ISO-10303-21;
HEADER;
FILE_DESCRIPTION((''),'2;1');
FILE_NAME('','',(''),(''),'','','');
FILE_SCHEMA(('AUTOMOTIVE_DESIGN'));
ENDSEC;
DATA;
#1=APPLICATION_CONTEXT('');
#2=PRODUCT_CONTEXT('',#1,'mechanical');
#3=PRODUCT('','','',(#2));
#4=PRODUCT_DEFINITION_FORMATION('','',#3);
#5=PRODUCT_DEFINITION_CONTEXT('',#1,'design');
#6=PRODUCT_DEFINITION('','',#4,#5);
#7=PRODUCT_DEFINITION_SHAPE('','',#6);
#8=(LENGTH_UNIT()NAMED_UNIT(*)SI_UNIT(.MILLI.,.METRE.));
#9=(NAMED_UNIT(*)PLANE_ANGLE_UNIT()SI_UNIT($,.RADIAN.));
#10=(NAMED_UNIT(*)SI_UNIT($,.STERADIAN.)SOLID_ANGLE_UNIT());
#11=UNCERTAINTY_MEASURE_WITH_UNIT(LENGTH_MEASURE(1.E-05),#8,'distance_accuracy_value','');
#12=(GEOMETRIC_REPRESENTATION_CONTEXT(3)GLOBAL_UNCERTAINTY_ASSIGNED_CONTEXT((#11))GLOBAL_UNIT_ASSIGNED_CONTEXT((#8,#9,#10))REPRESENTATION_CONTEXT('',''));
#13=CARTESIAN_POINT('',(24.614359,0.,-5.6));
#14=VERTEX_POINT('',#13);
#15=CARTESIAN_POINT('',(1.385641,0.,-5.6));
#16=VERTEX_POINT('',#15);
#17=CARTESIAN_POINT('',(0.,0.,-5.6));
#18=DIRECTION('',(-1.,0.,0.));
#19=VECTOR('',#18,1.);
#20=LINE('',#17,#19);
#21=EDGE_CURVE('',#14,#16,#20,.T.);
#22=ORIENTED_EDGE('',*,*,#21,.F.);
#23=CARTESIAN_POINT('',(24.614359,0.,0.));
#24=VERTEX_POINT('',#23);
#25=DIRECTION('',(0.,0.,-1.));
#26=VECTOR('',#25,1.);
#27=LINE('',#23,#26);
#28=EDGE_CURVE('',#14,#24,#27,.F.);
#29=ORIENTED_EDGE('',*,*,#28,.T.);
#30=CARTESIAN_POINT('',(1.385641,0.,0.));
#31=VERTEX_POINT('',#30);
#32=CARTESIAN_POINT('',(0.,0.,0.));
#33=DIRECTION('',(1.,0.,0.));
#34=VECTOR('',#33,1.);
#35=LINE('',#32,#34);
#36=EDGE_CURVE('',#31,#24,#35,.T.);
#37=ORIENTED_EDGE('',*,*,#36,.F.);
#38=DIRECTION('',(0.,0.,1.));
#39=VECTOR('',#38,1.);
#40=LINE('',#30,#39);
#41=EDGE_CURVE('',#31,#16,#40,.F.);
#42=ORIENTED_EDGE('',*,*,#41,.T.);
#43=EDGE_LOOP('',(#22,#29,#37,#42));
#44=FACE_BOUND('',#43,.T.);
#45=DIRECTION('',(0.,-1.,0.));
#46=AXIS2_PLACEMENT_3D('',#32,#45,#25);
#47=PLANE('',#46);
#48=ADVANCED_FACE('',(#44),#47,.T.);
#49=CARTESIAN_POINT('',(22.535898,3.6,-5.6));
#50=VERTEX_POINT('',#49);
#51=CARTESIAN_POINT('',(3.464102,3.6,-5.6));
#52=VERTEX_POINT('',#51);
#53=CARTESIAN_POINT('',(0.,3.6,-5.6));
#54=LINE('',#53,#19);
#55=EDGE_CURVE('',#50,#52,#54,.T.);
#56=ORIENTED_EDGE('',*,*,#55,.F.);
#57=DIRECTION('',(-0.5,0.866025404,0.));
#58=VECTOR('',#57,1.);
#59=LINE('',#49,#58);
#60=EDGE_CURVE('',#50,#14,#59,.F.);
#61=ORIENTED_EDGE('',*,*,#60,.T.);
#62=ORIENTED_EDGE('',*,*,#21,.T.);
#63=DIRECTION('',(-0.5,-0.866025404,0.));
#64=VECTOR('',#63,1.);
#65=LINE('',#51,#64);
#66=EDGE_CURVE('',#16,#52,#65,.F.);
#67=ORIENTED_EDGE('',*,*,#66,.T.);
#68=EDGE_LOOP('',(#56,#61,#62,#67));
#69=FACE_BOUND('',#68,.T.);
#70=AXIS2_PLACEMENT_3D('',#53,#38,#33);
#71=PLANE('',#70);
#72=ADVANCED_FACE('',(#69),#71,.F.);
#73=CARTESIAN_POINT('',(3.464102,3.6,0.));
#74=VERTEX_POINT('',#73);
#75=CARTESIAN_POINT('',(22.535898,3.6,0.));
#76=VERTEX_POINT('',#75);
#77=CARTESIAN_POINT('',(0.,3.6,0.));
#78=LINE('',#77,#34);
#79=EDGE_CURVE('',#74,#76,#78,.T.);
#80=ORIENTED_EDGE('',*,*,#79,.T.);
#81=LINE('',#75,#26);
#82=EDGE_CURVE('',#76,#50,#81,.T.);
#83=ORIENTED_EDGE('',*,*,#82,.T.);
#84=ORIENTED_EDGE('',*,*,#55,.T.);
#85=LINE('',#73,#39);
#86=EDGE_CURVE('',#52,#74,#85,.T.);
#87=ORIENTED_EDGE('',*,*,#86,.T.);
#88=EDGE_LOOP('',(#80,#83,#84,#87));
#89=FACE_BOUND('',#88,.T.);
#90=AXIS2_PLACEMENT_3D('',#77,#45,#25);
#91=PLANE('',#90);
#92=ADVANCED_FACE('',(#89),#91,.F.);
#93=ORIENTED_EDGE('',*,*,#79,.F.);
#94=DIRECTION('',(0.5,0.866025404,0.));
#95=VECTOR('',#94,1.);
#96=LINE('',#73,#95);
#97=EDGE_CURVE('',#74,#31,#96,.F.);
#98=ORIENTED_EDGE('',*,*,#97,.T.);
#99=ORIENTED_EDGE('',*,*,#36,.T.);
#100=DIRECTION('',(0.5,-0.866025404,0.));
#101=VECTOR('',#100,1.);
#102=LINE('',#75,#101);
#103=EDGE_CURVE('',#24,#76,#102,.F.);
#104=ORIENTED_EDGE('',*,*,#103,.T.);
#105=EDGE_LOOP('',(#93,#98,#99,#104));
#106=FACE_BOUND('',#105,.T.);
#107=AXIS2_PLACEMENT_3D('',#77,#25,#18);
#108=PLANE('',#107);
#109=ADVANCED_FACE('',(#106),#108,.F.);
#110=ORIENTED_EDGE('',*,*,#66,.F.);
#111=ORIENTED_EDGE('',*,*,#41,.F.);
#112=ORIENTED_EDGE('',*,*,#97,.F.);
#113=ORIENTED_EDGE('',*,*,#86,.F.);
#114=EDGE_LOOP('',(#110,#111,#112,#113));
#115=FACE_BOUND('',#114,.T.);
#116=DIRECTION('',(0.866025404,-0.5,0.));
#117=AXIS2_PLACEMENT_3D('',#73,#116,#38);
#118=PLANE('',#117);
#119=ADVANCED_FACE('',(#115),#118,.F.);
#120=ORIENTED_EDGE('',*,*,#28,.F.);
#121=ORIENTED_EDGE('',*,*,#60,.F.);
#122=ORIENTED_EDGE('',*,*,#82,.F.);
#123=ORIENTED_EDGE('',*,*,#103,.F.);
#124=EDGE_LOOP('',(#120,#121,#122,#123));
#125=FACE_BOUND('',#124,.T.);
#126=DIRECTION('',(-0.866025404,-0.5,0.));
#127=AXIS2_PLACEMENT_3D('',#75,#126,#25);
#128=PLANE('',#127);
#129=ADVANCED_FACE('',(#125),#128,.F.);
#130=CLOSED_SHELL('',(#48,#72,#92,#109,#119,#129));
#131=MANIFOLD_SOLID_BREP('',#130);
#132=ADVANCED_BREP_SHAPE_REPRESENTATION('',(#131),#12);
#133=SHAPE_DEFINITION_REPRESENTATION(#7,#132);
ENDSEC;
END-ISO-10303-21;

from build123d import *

# Parameters (mm, degrees)
SKETCH1_W           = 26
SKETCH1_H           = 5.6
BOSS_EXTRUDE1_DEPTH = 3.6
CHAMFER1_SIZE       = 6
CHAMFER1_SIZE_2     = 3.464101615


with BuildPart() as part:
    # Sketch1 → Boss-Extrude1 (new body)
    with BuildSketch(Plane(origin=(0, 0, 0), x_dir=(1, 0, 0), z_dir=(0, 1, 0))):
        with Locations((13, 2.8)):
            Rectangle(SKETCH1_W, SKETCH1_H)
    extrude(amount=BOSS_EXTRUDE1_DEPTH)

    # Chamfer1
    # the kernel refuses this chamfer: 6, 3.464101615 mm, written as the material it takes off along each edge
    with BuildSketch(Plane(origin=(0, 3.6, -21.122514528), x_dir=(-0.019326765612700744, -0.9998132206222078, 0), z_dir=(0, 0, 1)), Plane(origin=(26, 3.6, 15.522514528), x_dir=(0.019326765612700865, -0.9998132206222078, 0), z_dir=(0, 0, -1))) as chamfer1_piece_1:
        Polygon((CHAMFER1_SIZE * 0.999813220622, CHAMFER1_SIZE * 0.0193267656127), (-CHAMFER1_SIZE_2 * 0.0193267656135, CHAMFER1_SIZE_2 * 0.999813220662), (0, 0), align=None)
    extrude(amount=36.645029056, mode=Mode.SUBTRACT)


solid = part.part
